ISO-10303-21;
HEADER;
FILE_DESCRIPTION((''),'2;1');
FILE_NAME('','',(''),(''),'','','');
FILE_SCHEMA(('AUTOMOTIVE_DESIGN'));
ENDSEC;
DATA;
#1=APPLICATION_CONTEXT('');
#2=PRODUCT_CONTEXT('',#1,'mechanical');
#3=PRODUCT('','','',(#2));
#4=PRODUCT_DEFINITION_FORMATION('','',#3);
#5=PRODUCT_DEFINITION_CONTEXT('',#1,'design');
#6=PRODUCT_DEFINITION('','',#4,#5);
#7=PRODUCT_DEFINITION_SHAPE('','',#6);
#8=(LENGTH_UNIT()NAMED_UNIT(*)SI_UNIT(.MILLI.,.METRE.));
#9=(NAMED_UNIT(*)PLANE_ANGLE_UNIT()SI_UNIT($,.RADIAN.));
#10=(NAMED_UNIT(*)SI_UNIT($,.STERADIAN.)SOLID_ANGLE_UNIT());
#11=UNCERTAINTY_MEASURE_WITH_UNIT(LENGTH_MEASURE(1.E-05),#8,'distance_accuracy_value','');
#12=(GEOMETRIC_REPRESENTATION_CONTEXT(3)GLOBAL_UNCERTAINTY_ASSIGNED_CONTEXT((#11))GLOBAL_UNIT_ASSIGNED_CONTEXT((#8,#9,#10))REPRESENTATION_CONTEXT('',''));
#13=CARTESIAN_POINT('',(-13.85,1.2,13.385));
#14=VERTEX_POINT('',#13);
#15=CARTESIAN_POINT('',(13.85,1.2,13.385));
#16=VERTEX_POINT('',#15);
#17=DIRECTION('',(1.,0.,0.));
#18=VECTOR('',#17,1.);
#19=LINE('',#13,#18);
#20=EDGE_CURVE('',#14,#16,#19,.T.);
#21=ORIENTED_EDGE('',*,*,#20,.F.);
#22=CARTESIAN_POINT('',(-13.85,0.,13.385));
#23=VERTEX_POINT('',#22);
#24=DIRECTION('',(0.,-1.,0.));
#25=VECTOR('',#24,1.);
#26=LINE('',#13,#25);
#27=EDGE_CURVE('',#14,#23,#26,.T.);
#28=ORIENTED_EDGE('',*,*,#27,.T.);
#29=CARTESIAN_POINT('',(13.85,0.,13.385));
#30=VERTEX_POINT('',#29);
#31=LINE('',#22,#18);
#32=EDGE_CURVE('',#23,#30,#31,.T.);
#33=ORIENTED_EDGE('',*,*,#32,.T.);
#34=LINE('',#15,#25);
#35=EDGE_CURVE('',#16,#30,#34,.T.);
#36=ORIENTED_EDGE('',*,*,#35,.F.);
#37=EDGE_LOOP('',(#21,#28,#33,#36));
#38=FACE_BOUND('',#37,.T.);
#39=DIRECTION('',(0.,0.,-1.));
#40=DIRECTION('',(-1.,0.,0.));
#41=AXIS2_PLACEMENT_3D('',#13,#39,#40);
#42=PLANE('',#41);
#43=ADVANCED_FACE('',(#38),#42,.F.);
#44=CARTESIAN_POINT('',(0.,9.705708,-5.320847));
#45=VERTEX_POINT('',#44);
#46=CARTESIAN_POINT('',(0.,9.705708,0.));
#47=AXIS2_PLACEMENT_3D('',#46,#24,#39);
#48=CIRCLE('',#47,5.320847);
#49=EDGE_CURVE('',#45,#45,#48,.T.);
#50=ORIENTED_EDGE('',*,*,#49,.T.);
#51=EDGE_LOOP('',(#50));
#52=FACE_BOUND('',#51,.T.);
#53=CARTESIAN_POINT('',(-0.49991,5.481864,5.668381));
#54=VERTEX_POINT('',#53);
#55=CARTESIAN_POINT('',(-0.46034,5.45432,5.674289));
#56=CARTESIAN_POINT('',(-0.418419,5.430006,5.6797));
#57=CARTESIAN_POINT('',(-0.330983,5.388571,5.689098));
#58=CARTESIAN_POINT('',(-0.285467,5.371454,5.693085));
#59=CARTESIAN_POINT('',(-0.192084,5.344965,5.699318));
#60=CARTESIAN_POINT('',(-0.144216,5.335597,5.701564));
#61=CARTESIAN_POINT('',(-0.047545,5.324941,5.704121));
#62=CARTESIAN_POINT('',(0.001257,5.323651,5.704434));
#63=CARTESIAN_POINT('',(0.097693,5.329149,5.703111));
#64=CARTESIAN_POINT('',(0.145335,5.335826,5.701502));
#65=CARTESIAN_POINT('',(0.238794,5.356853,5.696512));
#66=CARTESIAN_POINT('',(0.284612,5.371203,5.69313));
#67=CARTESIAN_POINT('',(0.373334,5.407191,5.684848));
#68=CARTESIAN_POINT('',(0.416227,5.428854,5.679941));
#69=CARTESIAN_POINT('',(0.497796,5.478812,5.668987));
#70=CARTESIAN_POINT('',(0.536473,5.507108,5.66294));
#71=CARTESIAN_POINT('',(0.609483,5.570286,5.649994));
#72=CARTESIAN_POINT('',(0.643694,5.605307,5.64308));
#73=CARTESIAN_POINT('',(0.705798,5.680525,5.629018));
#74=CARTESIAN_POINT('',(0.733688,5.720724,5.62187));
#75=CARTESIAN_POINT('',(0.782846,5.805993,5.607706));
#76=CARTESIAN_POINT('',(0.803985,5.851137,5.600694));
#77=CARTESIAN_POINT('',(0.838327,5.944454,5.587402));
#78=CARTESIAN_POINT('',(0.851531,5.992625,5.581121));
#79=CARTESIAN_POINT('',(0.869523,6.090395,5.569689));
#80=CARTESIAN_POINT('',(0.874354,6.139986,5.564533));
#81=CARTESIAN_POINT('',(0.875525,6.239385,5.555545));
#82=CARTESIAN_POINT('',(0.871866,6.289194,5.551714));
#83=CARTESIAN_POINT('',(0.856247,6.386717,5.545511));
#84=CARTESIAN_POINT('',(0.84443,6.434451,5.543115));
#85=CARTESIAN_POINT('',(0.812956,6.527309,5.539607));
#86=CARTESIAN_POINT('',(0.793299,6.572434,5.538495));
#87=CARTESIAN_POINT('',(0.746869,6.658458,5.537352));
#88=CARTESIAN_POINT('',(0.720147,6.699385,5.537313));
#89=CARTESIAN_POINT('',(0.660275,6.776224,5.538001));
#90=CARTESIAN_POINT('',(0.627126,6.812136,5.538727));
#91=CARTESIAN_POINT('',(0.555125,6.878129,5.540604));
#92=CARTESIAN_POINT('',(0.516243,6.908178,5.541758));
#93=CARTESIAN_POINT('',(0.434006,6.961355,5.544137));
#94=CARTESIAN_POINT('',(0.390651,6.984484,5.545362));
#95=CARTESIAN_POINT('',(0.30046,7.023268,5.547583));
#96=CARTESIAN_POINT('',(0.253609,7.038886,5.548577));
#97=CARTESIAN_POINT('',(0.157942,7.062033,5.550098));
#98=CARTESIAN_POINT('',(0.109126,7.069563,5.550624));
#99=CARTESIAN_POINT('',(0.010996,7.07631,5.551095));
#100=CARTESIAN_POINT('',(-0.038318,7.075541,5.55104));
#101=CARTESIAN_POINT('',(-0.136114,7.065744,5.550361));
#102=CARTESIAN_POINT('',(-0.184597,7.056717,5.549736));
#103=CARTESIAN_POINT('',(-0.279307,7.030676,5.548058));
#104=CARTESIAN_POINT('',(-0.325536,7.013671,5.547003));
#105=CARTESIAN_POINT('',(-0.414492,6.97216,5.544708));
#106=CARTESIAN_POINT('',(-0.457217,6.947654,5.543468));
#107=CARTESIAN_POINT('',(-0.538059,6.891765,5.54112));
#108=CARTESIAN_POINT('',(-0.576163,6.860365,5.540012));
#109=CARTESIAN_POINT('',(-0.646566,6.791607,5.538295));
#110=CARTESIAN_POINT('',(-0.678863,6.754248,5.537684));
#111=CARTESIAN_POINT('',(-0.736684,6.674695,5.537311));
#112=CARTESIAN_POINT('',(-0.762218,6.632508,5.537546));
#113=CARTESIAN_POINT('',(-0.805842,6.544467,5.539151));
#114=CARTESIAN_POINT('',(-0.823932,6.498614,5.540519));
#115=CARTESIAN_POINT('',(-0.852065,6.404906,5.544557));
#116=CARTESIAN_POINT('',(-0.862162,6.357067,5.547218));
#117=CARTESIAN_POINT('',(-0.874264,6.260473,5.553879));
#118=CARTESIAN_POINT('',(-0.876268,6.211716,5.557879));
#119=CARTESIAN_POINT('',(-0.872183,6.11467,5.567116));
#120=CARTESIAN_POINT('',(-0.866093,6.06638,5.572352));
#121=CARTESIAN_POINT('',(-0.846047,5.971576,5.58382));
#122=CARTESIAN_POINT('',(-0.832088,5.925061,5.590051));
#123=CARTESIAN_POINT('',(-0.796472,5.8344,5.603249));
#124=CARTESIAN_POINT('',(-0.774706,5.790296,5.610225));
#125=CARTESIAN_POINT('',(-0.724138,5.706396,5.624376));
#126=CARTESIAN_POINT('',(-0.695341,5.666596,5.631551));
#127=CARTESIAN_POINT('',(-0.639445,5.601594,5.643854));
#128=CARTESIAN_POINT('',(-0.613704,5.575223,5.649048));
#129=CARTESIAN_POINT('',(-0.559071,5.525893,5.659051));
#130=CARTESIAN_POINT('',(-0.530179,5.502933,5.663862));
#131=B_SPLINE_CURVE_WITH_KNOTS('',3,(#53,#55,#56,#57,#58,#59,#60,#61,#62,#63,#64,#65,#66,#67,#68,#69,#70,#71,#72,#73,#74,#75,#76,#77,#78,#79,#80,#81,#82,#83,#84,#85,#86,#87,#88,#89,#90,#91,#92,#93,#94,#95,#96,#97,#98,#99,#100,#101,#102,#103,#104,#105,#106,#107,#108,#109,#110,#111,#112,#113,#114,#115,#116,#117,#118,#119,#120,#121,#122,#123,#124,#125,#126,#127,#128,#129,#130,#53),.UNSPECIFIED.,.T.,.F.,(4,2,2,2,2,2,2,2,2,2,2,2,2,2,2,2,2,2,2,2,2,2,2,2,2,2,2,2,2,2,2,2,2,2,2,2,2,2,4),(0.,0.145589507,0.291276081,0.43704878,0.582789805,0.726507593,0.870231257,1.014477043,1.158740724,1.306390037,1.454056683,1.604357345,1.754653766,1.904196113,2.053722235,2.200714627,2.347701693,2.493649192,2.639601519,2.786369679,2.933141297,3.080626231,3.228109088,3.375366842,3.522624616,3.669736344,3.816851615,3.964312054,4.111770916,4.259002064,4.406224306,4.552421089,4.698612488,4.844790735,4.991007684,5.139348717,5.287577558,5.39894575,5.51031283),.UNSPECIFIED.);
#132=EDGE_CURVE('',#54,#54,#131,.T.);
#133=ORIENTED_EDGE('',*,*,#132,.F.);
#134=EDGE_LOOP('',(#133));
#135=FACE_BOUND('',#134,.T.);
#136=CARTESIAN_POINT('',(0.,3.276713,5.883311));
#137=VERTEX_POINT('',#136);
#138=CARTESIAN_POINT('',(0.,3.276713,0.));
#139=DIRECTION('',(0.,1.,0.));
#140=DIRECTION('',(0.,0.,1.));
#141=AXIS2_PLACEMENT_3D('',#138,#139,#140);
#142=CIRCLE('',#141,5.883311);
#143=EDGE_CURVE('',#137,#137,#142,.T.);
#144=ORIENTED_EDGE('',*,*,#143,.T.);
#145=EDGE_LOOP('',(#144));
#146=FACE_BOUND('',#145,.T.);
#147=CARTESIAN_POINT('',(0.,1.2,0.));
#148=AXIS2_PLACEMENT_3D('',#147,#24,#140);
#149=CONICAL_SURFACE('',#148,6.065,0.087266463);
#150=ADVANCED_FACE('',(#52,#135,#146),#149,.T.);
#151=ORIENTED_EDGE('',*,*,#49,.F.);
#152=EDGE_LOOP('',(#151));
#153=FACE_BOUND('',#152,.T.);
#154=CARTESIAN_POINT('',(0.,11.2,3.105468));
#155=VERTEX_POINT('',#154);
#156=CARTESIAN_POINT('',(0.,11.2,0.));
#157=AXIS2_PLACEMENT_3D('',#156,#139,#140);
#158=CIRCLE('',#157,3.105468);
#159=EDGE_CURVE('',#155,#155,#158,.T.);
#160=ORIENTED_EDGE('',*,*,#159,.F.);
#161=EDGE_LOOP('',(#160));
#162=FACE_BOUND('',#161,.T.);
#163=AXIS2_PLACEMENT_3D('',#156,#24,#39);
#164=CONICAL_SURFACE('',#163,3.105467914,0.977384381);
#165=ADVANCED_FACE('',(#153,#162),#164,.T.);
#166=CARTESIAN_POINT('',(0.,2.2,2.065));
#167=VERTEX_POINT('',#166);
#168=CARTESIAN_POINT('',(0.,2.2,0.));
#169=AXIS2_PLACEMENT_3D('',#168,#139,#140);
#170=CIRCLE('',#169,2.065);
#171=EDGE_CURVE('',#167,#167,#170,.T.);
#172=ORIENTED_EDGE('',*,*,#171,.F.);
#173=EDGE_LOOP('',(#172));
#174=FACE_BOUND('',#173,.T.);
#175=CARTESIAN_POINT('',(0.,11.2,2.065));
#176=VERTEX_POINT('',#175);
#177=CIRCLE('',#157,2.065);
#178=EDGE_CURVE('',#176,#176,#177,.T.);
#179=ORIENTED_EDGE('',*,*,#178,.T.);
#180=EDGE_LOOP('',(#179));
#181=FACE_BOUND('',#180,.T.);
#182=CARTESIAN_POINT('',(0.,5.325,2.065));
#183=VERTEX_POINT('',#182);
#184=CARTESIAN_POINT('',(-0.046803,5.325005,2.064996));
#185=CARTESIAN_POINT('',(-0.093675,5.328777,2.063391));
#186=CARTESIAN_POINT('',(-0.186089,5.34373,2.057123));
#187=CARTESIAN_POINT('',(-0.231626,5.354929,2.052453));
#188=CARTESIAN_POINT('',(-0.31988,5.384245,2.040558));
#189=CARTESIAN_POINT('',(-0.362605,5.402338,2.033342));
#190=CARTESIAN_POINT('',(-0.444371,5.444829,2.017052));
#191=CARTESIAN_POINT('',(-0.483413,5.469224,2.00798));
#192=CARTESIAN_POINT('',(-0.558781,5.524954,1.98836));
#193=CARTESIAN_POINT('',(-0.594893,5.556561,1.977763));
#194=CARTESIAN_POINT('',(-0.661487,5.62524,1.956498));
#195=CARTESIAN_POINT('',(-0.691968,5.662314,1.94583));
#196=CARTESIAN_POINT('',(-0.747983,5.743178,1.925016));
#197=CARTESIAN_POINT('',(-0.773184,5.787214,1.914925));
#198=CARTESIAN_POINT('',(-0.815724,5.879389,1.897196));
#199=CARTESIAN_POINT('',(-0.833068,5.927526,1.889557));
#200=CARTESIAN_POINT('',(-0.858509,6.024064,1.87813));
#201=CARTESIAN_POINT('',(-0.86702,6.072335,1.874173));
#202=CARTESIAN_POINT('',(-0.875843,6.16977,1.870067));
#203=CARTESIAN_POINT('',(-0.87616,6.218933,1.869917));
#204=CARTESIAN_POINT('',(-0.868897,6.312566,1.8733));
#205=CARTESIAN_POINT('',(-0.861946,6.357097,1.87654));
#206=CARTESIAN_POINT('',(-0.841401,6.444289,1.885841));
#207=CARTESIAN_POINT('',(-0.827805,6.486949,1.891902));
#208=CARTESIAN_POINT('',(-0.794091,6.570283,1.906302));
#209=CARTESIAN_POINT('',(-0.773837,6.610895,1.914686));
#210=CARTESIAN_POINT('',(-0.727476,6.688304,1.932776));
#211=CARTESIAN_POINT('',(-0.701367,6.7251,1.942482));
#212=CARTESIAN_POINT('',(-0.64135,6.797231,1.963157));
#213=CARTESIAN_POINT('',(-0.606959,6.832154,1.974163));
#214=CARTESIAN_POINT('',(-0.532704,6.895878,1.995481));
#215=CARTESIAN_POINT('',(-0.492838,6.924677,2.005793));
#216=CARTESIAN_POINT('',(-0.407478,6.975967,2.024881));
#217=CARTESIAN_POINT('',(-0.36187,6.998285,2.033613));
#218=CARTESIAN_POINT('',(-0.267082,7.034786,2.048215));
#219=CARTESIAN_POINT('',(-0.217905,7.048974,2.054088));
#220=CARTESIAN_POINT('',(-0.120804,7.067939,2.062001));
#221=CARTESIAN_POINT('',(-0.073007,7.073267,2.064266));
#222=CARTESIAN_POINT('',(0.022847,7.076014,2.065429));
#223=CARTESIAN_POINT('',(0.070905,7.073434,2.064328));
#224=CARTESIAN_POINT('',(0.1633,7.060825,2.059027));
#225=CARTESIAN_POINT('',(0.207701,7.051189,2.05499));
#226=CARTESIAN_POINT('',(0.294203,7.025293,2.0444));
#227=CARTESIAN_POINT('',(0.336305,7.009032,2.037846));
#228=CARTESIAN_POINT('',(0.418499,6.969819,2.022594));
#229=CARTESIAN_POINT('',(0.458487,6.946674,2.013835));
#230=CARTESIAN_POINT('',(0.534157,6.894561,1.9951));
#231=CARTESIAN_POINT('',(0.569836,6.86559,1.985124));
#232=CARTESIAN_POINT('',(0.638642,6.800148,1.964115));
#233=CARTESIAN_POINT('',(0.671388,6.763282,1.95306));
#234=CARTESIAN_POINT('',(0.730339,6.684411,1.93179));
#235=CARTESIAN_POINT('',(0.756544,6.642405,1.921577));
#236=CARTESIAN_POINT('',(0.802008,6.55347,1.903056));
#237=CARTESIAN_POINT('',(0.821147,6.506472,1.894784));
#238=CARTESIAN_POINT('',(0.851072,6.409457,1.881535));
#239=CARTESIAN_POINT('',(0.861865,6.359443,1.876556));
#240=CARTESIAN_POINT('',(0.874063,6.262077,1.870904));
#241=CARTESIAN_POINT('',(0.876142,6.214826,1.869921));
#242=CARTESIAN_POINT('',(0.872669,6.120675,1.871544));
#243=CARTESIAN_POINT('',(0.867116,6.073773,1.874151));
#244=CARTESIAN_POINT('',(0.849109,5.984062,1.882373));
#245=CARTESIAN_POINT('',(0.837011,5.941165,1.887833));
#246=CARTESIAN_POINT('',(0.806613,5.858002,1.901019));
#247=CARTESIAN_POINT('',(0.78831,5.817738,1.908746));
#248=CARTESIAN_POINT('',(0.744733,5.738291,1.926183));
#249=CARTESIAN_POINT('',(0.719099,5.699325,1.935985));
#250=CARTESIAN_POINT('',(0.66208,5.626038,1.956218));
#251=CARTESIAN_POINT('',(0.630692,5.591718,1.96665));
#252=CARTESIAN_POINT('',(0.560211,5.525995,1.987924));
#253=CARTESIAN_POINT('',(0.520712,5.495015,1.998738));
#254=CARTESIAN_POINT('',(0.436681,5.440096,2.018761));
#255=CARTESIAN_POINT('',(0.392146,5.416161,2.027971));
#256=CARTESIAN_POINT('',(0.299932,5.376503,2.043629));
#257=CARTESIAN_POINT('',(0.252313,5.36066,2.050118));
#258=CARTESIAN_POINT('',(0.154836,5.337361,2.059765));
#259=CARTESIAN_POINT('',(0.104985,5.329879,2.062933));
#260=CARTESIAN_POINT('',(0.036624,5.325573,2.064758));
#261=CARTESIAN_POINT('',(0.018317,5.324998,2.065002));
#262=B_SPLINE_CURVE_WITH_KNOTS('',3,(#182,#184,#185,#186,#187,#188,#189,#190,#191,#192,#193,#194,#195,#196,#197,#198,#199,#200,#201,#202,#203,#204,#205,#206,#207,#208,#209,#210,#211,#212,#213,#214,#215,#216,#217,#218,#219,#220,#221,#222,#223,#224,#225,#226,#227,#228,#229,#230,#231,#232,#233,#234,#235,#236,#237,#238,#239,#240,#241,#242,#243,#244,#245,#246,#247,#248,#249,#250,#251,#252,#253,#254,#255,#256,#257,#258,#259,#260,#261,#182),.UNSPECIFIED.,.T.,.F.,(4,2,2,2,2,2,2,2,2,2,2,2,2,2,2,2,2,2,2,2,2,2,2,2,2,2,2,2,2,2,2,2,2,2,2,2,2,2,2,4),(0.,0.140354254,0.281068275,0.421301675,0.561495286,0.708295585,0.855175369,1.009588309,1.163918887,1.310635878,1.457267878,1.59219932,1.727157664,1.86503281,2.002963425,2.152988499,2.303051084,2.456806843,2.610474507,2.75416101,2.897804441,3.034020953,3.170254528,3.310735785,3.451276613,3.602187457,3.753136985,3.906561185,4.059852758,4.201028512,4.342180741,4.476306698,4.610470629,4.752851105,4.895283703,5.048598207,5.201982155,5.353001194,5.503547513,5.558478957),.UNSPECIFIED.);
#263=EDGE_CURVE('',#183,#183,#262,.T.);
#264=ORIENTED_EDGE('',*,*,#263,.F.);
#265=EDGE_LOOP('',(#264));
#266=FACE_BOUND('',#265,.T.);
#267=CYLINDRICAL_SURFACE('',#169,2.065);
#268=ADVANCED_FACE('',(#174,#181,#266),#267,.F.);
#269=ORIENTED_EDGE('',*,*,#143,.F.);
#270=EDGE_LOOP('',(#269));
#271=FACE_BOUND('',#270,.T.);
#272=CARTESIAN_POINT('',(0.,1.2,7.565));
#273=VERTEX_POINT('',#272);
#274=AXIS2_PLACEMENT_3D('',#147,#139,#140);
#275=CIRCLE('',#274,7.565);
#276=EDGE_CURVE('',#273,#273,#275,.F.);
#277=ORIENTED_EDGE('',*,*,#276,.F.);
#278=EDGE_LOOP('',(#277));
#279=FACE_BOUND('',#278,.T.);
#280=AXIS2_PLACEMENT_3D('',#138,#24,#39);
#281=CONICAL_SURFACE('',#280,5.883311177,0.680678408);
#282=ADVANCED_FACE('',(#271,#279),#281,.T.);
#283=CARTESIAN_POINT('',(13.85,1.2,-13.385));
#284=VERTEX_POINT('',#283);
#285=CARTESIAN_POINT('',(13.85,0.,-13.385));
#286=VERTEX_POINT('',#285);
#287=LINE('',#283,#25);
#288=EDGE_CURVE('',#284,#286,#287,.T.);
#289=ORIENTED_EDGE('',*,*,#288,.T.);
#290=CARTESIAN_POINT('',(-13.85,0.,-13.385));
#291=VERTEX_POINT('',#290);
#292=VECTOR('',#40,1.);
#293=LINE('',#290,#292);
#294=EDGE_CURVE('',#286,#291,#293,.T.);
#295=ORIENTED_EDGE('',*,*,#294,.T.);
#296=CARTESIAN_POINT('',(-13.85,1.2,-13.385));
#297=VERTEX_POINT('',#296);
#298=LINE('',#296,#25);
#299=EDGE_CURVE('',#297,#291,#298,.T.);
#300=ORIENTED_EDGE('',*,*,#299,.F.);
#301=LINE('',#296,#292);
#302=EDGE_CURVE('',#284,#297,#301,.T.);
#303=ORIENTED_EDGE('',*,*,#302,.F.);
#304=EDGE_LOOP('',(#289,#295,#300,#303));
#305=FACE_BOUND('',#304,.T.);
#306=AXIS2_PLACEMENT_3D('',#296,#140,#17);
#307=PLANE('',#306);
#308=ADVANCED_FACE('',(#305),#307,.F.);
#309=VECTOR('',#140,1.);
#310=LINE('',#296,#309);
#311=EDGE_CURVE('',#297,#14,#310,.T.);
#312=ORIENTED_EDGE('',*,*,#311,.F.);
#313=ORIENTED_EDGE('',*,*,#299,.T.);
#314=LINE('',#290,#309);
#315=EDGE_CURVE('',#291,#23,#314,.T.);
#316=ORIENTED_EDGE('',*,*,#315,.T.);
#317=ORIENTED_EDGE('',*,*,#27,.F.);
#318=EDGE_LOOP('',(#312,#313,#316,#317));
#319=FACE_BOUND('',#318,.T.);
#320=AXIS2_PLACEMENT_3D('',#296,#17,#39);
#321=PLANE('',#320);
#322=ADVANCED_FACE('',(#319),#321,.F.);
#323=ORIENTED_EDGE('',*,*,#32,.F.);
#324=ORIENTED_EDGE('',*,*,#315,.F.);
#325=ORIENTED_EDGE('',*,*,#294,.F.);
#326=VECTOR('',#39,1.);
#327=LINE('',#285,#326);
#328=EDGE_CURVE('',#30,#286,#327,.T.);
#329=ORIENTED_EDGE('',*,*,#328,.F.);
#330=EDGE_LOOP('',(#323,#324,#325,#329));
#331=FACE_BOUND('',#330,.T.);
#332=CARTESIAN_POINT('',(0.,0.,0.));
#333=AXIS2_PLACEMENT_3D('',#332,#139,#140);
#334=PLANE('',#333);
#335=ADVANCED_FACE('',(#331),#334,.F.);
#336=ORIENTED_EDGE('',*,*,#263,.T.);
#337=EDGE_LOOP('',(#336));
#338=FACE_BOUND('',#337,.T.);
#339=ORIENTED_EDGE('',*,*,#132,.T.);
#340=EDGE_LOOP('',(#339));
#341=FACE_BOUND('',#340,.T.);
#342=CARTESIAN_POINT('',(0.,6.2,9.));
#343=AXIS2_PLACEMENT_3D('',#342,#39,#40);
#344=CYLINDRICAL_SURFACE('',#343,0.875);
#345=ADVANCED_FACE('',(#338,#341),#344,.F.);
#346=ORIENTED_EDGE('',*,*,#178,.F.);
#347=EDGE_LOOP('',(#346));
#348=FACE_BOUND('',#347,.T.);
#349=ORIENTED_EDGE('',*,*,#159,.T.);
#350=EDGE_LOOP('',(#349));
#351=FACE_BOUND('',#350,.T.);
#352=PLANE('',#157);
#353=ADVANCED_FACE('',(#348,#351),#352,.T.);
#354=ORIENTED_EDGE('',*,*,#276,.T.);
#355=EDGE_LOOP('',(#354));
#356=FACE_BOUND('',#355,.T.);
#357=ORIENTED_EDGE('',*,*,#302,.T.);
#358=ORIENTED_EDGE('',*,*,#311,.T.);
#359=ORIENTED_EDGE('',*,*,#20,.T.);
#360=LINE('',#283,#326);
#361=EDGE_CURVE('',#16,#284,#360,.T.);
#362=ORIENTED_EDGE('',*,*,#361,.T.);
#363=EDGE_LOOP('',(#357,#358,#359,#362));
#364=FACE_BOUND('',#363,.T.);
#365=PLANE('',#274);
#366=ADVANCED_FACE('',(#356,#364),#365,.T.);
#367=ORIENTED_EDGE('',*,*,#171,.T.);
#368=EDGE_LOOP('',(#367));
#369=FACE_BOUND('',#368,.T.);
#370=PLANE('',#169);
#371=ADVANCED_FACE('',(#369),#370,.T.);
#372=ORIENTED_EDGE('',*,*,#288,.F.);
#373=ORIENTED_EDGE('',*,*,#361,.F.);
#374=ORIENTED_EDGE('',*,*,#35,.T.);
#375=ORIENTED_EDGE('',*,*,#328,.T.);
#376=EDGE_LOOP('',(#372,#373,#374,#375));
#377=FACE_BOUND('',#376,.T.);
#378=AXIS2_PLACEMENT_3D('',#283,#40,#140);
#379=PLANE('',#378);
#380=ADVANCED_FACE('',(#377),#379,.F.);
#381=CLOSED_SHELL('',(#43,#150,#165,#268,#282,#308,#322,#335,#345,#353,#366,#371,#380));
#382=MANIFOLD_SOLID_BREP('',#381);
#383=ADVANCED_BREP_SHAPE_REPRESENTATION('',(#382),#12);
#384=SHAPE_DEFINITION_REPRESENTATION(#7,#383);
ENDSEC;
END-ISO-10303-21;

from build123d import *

# Parameters (mm, degrees)
SKETCH1_W           = 27.7
SKETCH1_H           = 26.77
BOSS_EXTRUDE1_DEPTH = 1.2
SKETCH2_R           = 6.065
BOSS_EXTRUDE2_DEPTH = 10
BOSS_EXTRUDE2_TAPER = 5
SKETCH3_R           = 2.065
CUT_EXTRUDE1_DEPTH  = 9
CHAMFER1_SIZE       = 1.5
CHAMFER1_SIZE_2     = 2.084645451
SKETCH4_R           = 0.875
CUT_EXTRUDE2_DEPTH  = 9


with BuildPart() as part:
    # Sketch1 → Boss-Extrude1 (new body)
    with BuildSketch(Plane(origin=(0, 0, 0), x_dir=(1, 0, 0), z_dir=(0, 1, 0))):
        Rectangle(SKETCH1_W, SKETCH1_H)
    extrude(amount=BOSS_EXTRUDE1_DEPTH)

    # Sketch2 → Boss-Extrude2 (add)
    with BuildSketch(Plane(origin=(0, 1.2, 0), x_dir=(1, 0, 0), z_dir=(0, 1, 0))):
        Circle(SKETCH2_R)
    extrude(amount=BOSS_EXTRUDE2_DEPTH, taper=BOSS_EXTRUDE2_TAPER)

    # Sketch3 → Cut-Extrude1 (cut)
    with BuildSketch(Plane(origin=(0, 11.2, 0), x_dir=(1, 0, 0), z_dir=(0, 1, 0))):
        with Locations(Location((0, 0, 0), (0, 0, 270))):
            Circle(SKETCH3_R)
    extrude(amount=-CUT_EXTRUDE1_DEPTH, mode=Mode.SUBTRACT)

    # Chamfer1
    # the kernel refuses this chamfer: 2.084645451, 1.5 mm, written as the material it adds along each edge
    with BuildSketch(Plane(origin=(0, 1.2, 0), x_dir=(1, 0, 0), z_dir=(0, 0, 1))) as chamfer1_piece_1:
        Polygon((6.065 + CHAMFER1_SIZE, 0), (6.065 - CHAMFER1_SIZE_2 * 0.0871557427277, CHAMFER1_SIZE_2 * 0.996194697864), (6.065, 0), align=None)
    revolve(axis=Axis((0, 1.2, 0), (0, 1, 0)))
    # the kernel refuses this chamfer: 2.084645451, 1.5 mm, written as the material it takes off along each edge
    with BuildSketch(Plane(origin=(0, 11.2, 0), x_dir=(1, 0, 0), z_dir=(0, 0, -1))) as chamfer1_2_piece_1:
        Polygon((5.190113365 + CHAMFER1_SIZE * 0.0871557427477, CHAMFER1_SIZE * 0.996194698092), (5.190113365 - CHAMFER1_SIZE_2, 0), (5.190113365, 0), align=None)
    revolve(axis=Axis((0, 11.2, 0), (0, -1, 0)), mode=Mode.SUBTRACT)

    # Sketch4 → Cut-Extrude2 (cut)
    with BuildSketch(Plane.XY):
        with Locations(Location((0, 6.2, 0), (0, 0, 90.000000002))):
            Circle(SKETCH4_R)
    extrude(amount=CUT_EXTRUDE2_DEPTH, mode=Mode.SUBTRACT)


solid = part.part
